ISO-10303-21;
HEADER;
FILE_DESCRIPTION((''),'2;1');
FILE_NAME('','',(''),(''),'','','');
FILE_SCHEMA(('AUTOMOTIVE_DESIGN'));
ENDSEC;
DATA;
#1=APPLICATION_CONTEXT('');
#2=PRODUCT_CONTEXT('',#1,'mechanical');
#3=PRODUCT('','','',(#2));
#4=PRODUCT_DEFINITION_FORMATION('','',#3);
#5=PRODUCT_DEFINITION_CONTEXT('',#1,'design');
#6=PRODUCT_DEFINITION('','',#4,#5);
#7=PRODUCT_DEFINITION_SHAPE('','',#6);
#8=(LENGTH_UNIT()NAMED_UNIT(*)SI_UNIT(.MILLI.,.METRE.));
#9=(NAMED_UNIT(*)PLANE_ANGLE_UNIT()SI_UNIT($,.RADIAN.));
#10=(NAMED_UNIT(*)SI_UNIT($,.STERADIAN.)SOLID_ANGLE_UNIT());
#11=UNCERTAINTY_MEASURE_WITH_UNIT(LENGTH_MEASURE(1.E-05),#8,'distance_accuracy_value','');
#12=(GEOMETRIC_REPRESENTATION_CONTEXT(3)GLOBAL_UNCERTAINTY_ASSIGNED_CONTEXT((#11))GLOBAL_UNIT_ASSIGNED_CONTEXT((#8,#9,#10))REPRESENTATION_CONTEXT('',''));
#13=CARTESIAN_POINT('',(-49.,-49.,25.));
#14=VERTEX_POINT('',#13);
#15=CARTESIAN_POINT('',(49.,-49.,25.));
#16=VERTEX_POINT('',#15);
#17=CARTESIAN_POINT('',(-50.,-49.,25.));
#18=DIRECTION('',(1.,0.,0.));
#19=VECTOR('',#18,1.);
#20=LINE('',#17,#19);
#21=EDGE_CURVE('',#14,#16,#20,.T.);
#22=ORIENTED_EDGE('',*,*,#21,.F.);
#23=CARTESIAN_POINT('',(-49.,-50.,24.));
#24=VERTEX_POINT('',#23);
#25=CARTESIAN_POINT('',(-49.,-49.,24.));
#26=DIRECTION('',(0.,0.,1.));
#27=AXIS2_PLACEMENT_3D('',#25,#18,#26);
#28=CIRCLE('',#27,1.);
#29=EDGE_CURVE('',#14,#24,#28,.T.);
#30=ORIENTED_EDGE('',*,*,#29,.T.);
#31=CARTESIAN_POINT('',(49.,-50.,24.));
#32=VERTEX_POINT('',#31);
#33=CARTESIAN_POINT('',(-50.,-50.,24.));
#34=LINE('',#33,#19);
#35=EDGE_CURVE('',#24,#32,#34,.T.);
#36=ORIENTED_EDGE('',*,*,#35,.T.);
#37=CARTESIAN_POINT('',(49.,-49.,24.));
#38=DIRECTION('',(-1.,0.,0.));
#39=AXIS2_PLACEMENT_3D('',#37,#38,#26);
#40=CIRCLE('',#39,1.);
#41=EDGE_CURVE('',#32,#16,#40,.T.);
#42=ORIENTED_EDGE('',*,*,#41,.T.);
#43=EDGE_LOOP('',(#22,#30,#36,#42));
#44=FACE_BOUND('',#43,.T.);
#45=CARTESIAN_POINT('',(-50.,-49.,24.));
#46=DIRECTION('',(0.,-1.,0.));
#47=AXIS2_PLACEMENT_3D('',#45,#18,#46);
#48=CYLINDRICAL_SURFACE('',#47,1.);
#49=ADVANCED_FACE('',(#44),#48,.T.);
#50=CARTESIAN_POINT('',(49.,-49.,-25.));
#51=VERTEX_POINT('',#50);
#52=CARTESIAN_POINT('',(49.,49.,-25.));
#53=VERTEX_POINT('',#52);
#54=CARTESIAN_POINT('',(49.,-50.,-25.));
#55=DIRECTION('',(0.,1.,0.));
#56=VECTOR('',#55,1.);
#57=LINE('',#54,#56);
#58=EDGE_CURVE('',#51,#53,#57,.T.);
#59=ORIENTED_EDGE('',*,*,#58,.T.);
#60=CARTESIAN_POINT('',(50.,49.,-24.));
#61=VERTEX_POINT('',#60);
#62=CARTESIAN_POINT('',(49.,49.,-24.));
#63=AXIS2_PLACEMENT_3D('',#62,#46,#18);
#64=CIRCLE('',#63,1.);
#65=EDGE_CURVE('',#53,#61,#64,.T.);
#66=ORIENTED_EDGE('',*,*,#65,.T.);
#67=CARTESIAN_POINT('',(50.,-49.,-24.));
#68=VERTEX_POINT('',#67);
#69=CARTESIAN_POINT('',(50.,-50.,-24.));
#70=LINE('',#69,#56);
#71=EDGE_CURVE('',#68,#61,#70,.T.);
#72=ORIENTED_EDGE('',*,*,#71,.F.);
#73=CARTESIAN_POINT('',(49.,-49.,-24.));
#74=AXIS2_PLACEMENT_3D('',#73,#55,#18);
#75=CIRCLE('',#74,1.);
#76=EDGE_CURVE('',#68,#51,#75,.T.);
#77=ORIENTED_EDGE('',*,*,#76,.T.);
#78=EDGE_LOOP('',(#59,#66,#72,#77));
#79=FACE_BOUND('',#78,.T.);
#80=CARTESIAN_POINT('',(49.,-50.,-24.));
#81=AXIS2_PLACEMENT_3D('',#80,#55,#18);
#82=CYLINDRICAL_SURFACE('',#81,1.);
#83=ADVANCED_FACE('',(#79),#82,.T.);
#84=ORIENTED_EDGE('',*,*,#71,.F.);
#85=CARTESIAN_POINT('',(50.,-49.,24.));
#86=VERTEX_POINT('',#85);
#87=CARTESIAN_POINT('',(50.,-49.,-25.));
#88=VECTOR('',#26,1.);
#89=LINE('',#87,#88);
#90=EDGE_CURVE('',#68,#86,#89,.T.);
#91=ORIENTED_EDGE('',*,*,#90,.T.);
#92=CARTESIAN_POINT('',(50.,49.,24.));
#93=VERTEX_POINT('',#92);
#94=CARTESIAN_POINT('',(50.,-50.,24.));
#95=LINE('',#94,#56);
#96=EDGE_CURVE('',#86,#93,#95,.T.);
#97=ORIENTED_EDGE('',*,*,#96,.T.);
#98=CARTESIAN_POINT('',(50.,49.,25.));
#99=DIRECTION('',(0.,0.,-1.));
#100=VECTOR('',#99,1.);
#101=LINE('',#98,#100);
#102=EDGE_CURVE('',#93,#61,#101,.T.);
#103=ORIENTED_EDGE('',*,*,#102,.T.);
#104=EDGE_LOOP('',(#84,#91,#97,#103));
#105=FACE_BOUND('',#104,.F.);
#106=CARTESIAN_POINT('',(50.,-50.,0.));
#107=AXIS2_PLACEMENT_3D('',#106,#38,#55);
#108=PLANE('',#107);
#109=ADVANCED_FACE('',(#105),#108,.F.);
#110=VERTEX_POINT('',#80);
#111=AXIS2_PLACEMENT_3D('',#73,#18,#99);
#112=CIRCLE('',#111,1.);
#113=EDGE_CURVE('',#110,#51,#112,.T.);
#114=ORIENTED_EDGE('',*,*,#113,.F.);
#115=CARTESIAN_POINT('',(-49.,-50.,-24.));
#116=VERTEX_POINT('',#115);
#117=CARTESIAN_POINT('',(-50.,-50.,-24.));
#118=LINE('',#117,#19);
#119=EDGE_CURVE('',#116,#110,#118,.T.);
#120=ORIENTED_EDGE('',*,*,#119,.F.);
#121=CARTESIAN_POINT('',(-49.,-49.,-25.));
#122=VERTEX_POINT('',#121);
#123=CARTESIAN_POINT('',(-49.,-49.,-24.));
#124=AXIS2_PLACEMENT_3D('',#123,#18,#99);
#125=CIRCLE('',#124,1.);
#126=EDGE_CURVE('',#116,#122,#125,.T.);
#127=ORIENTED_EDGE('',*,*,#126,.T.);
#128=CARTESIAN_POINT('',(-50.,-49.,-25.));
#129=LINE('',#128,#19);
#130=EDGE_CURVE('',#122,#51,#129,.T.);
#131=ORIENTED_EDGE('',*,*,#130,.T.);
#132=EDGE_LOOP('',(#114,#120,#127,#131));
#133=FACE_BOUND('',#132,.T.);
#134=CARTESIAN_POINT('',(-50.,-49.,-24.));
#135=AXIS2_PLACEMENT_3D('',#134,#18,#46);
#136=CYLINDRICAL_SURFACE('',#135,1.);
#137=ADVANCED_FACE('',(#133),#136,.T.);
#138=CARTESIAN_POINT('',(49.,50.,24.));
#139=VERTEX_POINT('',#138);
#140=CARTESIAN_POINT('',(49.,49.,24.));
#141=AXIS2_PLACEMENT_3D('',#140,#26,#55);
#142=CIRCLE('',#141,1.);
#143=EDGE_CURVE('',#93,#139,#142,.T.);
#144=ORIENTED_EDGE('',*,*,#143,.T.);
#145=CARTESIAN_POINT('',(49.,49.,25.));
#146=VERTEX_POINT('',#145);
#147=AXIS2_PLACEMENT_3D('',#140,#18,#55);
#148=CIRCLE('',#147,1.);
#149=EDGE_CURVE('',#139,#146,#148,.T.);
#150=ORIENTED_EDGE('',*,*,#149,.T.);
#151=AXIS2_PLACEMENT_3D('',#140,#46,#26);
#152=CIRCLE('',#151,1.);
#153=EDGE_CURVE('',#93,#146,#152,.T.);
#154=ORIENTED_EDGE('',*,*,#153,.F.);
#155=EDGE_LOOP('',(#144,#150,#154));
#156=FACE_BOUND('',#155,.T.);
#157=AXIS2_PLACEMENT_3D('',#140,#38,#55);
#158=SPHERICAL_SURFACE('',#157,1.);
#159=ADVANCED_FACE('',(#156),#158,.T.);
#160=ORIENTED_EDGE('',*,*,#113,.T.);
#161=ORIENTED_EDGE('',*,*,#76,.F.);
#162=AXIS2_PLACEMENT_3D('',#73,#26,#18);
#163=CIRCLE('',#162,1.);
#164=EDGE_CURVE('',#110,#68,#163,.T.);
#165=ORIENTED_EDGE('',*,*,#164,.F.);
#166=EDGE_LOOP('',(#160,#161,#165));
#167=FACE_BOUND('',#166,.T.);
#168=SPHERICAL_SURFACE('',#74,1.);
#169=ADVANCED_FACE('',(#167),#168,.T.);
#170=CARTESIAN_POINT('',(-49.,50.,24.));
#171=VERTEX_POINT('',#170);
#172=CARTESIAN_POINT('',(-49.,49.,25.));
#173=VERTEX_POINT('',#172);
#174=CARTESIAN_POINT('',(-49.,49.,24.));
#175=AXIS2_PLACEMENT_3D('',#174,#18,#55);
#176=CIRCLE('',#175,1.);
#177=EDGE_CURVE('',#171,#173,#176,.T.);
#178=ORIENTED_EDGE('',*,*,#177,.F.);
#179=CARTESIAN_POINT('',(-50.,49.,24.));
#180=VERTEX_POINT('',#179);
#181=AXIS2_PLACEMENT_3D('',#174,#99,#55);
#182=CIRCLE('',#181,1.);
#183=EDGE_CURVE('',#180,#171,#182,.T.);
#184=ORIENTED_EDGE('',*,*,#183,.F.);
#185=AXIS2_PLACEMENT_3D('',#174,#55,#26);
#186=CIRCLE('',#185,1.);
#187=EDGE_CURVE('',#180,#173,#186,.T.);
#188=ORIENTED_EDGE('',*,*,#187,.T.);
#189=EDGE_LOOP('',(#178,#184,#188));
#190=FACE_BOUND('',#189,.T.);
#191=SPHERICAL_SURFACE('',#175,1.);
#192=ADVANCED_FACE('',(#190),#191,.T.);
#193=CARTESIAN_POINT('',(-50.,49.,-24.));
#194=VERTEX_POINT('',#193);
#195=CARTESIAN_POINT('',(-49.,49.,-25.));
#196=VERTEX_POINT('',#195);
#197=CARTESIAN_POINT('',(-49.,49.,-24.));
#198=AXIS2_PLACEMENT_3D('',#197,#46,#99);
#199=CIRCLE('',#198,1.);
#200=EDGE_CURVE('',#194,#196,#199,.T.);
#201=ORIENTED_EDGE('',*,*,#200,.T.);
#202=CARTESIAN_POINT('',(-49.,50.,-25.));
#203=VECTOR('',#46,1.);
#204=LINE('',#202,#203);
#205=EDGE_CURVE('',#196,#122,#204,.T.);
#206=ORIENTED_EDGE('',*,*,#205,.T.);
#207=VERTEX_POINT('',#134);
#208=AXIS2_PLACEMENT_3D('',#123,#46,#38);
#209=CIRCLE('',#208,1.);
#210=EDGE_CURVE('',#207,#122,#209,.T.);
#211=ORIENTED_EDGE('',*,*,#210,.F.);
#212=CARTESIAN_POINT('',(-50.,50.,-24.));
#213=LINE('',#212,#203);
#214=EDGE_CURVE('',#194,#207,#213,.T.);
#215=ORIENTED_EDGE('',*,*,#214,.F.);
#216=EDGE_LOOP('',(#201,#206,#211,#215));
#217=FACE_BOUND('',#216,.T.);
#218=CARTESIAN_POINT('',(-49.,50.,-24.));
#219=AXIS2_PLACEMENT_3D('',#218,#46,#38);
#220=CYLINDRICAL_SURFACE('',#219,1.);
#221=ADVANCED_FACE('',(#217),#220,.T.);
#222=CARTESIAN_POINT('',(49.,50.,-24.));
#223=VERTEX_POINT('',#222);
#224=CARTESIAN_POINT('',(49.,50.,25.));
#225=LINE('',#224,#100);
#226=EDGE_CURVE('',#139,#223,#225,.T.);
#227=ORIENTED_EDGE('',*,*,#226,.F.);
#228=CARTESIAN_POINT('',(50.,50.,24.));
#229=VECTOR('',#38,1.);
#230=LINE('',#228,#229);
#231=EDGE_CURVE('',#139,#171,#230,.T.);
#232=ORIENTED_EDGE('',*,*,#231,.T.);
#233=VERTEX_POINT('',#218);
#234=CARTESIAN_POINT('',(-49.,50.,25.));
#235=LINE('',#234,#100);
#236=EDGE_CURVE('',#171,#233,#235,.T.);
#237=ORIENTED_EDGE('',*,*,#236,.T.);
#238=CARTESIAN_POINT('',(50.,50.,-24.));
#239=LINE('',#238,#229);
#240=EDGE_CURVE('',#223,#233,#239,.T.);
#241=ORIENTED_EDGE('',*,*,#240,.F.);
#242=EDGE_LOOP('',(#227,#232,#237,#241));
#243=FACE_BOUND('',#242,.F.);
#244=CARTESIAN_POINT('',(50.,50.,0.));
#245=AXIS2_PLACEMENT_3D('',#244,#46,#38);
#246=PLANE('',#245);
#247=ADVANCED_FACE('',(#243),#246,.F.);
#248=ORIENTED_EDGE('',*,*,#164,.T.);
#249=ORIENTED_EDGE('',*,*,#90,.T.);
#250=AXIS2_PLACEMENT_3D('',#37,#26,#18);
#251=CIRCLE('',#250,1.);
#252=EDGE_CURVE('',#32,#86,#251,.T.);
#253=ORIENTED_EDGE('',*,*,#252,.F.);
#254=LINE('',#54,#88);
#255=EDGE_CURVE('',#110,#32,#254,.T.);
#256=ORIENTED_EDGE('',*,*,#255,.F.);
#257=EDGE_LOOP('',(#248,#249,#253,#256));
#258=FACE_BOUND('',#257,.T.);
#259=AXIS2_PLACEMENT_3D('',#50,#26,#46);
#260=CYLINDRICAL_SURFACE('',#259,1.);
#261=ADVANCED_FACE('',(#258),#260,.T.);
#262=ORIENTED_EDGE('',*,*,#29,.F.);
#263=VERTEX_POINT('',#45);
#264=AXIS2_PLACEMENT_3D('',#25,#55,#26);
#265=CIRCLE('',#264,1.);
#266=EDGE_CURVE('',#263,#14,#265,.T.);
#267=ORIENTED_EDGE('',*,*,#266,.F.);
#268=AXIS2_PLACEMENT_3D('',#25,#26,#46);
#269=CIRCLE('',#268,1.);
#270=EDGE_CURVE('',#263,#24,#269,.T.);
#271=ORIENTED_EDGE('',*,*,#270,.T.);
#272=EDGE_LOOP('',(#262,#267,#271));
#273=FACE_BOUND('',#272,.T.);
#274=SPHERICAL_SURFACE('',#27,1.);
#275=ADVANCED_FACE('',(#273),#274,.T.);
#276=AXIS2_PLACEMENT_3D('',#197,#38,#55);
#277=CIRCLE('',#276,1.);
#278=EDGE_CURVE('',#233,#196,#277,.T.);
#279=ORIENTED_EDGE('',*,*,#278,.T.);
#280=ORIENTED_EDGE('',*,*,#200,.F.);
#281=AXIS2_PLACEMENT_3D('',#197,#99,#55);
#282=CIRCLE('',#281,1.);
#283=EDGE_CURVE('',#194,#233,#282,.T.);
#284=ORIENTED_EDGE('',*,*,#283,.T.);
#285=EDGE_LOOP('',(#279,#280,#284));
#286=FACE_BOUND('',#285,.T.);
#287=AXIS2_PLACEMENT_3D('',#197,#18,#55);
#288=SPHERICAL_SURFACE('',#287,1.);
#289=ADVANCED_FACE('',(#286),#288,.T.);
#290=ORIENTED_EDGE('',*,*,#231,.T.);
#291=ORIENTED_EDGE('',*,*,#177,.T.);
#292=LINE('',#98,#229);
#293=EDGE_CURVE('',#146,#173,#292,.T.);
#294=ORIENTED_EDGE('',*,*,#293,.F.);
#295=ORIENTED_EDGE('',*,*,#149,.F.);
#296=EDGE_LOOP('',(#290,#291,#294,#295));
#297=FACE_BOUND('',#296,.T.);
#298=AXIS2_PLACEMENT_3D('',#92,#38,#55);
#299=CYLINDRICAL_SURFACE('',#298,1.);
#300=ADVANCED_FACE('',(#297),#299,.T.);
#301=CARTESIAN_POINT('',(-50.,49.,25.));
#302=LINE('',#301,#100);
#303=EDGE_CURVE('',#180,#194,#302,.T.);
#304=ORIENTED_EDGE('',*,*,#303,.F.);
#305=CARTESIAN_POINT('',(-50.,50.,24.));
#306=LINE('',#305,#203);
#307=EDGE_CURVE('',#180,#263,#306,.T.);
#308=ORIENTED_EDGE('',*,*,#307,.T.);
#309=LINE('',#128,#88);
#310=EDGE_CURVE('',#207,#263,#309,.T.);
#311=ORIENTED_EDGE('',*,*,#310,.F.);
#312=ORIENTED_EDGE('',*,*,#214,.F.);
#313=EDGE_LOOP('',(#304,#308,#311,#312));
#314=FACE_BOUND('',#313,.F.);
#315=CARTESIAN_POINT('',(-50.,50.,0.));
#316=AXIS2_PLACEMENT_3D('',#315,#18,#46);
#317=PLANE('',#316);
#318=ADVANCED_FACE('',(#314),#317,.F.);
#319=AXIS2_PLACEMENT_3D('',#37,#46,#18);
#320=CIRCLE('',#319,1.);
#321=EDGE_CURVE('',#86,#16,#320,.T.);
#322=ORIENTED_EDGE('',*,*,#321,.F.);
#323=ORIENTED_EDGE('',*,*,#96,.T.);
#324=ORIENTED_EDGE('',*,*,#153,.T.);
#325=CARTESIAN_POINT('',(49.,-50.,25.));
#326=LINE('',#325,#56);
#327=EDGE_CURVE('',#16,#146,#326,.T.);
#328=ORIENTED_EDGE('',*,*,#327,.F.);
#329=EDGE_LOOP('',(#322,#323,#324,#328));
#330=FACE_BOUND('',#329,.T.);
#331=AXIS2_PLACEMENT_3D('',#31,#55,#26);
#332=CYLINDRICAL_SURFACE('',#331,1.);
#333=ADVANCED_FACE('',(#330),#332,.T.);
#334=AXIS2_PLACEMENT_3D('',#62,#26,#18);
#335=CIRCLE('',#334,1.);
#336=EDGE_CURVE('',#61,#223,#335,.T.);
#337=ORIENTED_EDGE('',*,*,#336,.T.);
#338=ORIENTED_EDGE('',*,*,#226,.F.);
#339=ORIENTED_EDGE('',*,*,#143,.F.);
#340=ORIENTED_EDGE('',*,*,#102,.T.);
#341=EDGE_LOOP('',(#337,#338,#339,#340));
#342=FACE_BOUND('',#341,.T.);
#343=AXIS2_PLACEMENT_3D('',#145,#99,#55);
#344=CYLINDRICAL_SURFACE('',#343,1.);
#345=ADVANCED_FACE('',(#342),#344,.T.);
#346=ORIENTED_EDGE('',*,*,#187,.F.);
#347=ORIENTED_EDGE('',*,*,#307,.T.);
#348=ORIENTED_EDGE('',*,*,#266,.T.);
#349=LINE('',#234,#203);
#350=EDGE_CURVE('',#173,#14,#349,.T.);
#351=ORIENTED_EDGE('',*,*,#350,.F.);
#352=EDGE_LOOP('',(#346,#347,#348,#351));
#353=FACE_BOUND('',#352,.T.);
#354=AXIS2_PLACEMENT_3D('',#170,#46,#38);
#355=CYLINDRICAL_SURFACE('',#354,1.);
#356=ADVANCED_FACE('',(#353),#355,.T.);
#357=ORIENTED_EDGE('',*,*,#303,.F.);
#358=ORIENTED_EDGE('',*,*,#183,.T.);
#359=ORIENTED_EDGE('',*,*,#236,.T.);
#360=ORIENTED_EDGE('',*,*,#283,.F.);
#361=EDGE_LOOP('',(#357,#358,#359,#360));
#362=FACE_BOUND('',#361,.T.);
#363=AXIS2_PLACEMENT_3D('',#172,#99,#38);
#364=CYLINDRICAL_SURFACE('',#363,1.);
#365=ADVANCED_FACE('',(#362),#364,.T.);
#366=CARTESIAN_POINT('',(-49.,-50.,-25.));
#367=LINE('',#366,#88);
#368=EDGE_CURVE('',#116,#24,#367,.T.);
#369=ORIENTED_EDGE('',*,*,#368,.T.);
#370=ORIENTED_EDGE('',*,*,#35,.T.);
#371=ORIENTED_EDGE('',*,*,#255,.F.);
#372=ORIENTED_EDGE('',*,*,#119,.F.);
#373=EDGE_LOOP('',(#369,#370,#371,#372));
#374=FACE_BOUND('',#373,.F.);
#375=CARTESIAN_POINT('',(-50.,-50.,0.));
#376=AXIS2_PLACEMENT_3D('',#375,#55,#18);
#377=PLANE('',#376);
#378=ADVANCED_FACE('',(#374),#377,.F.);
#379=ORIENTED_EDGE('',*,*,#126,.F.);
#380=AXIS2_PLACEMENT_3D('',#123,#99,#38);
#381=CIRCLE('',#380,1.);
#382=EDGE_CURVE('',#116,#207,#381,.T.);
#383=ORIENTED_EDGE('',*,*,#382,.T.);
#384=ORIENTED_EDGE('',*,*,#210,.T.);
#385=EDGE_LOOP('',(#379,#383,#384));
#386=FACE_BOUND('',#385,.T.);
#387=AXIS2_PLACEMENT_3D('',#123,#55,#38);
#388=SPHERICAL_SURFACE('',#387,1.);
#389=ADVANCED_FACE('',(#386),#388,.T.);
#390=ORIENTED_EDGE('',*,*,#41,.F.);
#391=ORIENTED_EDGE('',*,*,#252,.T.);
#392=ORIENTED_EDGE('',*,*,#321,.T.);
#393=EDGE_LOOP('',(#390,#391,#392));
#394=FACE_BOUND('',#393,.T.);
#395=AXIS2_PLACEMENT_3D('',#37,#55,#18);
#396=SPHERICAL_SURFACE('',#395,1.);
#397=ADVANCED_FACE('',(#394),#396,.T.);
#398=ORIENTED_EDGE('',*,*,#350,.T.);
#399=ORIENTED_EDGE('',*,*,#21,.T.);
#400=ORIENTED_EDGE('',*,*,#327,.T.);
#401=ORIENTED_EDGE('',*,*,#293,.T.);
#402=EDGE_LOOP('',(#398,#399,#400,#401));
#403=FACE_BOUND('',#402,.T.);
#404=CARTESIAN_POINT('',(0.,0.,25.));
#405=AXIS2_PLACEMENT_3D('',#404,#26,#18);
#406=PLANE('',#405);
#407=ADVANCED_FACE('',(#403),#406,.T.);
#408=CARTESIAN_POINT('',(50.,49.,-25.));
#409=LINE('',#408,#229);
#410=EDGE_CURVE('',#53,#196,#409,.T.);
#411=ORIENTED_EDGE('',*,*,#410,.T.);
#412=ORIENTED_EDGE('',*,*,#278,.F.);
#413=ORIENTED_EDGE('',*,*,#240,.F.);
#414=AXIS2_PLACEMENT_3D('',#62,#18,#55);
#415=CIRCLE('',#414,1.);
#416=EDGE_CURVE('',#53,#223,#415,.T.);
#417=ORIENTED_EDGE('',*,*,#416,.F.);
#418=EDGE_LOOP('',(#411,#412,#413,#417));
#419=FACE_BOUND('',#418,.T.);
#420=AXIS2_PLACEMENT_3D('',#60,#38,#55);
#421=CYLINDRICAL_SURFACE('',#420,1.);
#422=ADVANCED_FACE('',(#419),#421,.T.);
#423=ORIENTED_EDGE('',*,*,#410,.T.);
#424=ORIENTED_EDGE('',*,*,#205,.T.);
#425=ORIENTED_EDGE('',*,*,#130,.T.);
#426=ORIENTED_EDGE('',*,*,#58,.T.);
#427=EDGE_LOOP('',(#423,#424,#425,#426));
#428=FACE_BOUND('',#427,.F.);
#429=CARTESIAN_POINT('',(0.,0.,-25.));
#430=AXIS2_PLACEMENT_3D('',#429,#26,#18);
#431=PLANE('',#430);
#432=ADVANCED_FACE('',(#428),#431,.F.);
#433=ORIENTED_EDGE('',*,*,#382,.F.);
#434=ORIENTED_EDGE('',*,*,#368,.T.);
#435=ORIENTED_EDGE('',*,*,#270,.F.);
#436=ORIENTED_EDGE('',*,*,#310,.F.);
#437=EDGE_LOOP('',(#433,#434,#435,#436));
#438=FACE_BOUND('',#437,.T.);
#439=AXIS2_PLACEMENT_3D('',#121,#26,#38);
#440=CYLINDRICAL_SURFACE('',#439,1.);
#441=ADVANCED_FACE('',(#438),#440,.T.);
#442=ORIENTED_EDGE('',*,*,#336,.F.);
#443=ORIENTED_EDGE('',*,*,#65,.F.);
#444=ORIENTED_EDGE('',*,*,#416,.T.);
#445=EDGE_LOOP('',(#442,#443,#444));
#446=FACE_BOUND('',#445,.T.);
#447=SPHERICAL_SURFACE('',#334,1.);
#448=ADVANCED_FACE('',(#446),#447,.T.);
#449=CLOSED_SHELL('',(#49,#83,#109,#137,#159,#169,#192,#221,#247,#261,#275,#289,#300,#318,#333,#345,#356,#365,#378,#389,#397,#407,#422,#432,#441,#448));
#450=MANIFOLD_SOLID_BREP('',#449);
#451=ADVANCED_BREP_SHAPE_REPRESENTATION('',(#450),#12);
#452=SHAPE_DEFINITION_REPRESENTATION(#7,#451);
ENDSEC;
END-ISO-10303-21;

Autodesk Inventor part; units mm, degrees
ref_plane "YZ Plane" through (0, 0, 0) normal (1, 0, 0) x (0, 1, 0)
ref_plane "XZ Plane" through (0, 0, 0) normal (0, 1, 0) x (-1, 0, 0)
ref_plane "XY Plane" through (0, 0, 0) normal (0, 0, 1) x (1, 0, 0)
sketch "Sketch1" plane through (0, 0, 0) normal (0, 0, 1) x (1, 0, 0)
  line L0 (-50, -50) -> (50, -50)
  line L1 (50, -50) -> (50, 50)
  line L2 (50, 50) -> (-50, 50)
  line L3 (-50, 50) -> (-50, -50)
  line L4 (-50, -50) -> (50, 50) construction
  line L5 (50, -50) -> (-50, 50) construction
  point P0 (0, 0)
  dimension "d0" = 100
  dimension "d1" = 100
extrude "Extrusion1" add sketch "Sketch1" along normal mid plane 50
fillet "Fillet2" radius 1 12 edges at (0, 50, 25) (50, 50, 0) (50, 0, 25) (50, 0, -25) (0, 50, -25) (50, -50, 0) (0, -50, 25) (-50, 50, 0) (-50, 0, -25) (-50, 0, 25) (-50, -50, 0) (0, -50, -25)
properties part number "magnet" material "Steel"
